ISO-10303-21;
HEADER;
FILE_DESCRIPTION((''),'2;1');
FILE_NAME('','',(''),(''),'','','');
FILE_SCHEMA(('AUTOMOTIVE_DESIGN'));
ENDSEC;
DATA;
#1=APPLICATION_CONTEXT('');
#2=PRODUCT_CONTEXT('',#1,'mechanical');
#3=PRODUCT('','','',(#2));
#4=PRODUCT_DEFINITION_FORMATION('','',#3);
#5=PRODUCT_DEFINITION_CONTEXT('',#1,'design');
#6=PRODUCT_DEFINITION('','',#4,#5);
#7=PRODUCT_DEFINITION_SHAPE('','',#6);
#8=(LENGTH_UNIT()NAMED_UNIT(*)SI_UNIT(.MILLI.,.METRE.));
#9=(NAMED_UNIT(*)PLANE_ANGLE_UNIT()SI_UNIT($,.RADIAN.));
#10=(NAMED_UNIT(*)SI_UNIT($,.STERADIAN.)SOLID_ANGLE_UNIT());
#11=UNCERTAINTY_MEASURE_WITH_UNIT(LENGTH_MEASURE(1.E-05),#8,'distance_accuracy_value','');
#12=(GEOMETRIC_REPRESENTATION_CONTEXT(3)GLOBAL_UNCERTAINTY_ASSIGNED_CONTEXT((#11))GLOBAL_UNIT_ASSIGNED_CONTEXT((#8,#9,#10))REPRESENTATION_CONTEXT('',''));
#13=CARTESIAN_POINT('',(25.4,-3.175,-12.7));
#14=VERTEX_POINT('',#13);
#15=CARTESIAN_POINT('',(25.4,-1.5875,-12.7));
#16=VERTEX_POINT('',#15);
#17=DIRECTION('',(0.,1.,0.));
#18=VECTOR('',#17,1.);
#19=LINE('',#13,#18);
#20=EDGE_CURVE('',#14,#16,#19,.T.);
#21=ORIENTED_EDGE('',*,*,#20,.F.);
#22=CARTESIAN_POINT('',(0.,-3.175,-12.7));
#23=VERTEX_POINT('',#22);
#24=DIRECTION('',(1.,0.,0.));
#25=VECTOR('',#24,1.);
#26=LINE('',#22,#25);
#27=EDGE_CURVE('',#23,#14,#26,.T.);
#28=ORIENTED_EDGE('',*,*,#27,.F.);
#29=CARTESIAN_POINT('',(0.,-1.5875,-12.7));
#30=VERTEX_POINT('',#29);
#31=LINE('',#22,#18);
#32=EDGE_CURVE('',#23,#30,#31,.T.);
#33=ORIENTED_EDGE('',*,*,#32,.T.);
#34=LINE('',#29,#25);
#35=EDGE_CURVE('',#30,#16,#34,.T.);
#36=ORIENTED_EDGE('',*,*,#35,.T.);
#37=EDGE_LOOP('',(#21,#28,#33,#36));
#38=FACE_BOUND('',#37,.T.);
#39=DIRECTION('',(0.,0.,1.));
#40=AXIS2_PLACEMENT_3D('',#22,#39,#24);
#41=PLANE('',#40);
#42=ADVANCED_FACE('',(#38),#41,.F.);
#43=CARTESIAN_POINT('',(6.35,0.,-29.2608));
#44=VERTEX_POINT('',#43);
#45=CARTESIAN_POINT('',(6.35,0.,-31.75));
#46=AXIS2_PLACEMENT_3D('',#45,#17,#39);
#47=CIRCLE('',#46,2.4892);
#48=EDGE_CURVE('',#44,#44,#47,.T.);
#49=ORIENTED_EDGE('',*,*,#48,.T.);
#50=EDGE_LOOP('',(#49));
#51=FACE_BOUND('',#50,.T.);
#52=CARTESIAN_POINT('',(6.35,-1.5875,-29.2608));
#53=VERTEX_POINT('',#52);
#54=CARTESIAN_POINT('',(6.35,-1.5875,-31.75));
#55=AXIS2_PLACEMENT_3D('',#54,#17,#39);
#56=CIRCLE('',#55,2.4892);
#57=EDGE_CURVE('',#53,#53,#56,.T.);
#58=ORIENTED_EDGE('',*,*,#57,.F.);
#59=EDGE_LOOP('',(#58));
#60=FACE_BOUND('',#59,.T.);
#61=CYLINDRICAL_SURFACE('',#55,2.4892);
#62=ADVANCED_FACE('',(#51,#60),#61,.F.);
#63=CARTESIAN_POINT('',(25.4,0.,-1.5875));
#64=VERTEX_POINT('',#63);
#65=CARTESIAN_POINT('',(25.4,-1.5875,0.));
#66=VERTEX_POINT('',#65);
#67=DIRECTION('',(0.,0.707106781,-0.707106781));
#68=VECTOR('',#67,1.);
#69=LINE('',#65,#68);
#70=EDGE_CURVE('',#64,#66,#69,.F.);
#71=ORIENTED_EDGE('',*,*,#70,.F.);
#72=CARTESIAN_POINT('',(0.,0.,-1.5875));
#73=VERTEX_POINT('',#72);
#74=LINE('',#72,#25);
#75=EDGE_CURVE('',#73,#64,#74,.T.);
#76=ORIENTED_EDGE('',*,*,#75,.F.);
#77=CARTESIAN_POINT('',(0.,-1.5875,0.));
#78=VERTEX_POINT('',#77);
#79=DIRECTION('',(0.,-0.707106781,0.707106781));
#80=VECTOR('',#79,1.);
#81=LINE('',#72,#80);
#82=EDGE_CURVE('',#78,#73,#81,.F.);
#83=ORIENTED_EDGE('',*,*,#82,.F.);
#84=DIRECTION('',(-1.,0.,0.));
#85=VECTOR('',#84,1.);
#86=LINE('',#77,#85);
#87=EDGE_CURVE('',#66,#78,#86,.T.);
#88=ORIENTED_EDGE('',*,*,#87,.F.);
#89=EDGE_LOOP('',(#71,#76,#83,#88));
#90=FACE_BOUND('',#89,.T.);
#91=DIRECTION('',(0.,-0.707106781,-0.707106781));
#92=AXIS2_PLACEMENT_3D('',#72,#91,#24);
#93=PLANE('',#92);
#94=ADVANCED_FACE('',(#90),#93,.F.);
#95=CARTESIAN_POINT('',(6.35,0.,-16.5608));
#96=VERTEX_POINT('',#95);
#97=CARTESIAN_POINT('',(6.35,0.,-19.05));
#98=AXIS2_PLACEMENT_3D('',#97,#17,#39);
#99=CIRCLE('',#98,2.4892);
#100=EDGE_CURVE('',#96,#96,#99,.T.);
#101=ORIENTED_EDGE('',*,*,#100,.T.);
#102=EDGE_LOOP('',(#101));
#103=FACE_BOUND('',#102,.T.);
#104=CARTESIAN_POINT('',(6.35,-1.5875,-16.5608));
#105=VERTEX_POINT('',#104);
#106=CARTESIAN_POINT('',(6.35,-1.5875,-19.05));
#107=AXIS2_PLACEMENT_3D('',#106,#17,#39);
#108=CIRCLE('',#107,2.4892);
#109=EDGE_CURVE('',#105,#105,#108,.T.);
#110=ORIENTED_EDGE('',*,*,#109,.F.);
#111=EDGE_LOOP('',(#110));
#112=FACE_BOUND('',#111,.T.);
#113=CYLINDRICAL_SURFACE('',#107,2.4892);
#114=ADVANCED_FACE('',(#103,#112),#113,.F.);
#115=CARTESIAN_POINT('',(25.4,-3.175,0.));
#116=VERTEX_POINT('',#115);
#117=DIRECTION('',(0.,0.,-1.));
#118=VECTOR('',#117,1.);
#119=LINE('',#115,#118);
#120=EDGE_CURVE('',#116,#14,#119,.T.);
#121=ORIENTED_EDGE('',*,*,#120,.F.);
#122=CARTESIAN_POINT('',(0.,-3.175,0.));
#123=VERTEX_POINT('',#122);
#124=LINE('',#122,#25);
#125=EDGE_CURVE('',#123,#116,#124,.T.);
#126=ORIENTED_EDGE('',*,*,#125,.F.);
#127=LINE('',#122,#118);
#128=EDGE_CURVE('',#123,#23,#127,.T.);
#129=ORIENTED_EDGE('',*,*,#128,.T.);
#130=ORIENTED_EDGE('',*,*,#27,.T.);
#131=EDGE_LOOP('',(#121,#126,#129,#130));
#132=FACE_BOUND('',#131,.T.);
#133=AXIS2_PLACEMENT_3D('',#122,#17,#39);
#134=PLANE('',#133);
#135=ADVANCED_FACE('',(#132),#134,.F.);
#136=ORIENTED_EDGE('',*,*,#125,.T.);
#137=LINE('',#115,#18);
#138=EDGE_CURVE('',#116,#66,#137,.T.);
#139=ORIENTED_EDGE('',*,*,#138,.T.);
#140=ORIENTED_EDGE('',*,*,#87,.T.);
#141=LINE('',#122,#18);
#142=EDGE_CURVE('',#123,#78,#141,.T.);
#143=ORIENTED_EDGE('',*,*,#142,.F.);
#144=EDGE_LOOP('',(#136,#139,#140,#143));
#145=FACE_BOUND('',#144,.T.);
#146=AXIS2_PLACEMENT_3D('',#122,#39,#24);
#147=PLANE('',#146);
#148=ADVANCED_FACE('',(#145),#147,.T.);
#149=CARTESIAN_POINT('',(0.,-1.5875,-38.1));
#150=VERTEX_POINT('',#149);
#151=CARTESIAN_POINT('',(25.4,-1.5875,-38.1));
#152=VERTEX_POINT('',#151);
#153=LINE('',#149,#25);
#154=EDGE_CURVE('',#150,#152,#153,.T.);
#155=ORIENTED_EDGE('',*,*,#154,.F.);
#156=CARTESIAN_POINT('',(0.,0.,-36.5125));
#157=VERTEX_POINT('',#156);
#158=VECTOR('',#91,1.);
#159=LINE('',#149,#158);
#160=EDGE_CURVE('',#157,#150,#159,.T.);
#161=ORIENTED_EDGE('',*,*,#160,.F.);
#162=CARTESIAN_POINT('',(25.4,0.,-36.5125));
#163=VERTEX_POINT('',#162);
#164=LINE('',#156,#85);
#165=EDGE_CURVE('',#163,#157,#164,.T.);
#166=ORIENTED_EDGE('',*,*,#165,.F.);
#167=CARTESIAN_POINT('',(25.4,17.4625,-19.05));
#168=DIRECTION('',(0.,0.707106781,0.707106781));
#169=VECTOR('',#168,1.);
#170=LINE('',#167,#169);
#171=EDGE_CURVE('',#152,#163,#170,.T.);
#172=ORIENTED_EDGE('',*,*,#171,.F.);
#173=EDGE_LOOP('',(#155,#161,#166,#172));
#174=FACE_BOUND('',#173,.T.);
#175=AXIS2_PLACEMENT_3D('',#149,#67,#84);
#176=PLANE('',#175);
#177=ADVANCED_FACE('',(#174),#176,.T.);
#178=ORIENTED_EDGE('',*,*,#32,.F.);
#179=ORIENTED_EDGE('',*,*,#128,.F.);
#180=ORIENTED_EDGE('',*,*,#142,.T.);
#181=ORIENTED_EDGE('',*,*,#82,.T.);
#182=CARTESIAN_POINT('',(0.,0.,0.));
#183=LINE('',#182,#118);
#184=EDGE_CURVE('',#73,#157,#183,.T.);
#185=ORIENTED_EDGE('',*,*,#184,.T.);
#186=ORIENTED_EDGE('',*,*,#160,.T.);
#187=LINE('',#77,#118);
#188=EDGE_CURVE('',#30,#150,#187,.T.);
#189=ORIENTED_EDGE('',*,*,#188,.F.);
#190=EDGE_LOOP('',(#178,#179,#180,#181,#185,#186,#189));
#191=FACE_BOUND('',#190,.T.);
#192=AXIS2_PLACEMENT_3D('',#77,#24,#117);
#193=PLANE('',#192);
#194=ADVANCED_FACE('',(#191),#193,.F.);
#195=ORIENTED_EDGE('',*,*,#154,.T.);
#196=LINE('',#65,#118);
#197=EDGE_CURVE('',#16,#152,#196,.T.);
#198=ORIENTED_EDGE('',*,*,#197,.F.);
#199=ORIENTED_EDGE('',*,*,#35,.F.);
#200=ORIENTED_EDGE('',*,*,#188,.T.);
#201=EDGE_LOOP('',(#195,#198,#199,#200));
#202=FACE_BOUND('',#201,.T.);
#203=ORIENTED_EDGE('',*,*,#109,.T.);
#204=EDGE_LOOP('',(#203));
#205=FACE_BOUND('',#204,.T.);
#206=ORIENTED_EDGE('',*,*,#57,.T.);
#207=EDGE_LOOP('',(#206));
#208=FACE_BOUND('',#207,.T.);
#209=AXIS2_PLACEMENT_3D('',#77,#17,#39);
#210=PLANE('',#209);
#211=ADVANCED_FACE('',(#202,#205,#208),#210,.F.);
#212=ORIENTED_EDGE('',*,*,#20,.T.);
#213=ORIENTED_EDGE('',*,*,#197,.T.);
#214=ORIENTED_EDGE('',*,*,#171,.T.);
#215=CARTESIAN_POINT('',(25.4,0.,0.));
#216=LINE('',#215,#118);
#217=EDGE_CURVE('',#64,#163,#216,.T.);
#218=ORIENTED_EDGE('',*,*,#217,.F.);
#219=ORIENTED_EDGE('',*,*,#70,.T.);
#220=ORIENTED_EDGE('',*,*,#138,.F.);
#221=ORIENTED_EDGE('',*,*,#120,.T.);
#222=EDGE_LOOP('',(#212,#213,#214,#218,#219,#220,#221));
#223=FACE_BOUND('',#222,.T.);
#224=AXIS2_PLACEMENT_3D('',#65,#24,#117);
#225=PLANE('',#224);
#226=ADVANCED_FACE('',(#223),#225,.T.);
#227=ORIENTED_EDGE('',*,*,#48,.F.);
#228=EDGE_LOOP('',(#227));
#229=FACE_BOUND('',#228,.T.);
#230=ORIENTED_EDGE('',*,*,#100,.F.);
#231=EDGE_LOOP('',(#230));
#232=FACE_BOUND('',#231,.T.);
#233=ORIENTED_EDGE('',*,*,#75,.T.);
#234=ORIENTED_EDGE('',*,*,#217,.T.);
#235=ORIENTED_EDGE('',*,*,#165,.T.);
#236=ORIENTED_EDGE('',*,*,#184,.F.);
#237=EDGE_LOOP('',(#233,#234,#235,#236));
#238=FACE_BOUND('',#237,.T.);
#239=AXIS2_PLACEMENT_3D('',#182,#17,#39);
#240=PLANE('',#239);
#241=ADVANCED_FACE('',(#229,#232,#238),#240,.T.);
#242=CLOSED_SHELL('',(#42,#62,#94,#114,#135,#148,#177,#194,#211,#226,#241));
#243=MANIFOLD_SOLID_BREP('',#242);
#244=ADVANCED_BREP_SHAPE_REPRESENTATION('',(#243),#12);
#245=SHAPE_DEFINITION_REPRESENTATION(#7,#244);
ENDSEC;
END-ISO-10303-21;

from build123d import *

# Parameters (mm, degrees)
SKETCH1_W           = 25.4
SKETCH1_H           = 25.4
SKETCH1_R           = 2.4892
BOSS_EXTRUDE1_DEPTH = 1.5875
SKETCH1_3_W         = 25.4
SKETCH1_3_H         = 12.7
BOSS_EXTRUDE2_DEPTH = 3.175
CHAMFER1_SIZE       = 1.5875


with BuildPart() as part:
    # Sketch1 → Boss-Extrude1 (new body)
    with BuildSketch(Plane(origin=(0, 0, 0), x_dir=(1, 0, 0), z_dir=(0, 1, 0))):
        with Locations((12.7, 25.4)):
            Rectangle(SKETCH1_W, SKETCH1_H)
        with Locations(Location((6.35, 19.05, 0), (0, 0, 270))):
            Circle(SKETCH1_R, mode=Mode.SUBTRACT)
        with Locations(Location((6.35, 31.75, 0), (0, 0, 270))):
            Circle(SKETCH1_R, mode=Mode.SUBTRACT)
    extrude(amount=-BOSS_EXTRUDE1_DEPTH)

    # Sketch1<3> → Boss-Extrude2 (add)
    with BuildSketch(Plane(origin=(0, 0, 0), x_dir=(1, 0, 0), z_dir=(0, 1, 0))):
        with Locations((12.7, 6.35)):
            Rectangle(SKETCH1_3_W, SKETCH1_3_H)
    extrude(amount=-BOSS_EXTRUDE2_DEPTH)

    # Chamfer1
    chamfer1_edges = [part.edges().sort_by_distance(p)[0] for p in [
        (12.7, 0, -38.1),
        (12.7, 0, 0),
    ]]
    chamfer(chamfer1_edges, length=CHAMFER1_SIZE - 0.0001)  # a hair under: the kernel refuses the full size


solid = part.part
